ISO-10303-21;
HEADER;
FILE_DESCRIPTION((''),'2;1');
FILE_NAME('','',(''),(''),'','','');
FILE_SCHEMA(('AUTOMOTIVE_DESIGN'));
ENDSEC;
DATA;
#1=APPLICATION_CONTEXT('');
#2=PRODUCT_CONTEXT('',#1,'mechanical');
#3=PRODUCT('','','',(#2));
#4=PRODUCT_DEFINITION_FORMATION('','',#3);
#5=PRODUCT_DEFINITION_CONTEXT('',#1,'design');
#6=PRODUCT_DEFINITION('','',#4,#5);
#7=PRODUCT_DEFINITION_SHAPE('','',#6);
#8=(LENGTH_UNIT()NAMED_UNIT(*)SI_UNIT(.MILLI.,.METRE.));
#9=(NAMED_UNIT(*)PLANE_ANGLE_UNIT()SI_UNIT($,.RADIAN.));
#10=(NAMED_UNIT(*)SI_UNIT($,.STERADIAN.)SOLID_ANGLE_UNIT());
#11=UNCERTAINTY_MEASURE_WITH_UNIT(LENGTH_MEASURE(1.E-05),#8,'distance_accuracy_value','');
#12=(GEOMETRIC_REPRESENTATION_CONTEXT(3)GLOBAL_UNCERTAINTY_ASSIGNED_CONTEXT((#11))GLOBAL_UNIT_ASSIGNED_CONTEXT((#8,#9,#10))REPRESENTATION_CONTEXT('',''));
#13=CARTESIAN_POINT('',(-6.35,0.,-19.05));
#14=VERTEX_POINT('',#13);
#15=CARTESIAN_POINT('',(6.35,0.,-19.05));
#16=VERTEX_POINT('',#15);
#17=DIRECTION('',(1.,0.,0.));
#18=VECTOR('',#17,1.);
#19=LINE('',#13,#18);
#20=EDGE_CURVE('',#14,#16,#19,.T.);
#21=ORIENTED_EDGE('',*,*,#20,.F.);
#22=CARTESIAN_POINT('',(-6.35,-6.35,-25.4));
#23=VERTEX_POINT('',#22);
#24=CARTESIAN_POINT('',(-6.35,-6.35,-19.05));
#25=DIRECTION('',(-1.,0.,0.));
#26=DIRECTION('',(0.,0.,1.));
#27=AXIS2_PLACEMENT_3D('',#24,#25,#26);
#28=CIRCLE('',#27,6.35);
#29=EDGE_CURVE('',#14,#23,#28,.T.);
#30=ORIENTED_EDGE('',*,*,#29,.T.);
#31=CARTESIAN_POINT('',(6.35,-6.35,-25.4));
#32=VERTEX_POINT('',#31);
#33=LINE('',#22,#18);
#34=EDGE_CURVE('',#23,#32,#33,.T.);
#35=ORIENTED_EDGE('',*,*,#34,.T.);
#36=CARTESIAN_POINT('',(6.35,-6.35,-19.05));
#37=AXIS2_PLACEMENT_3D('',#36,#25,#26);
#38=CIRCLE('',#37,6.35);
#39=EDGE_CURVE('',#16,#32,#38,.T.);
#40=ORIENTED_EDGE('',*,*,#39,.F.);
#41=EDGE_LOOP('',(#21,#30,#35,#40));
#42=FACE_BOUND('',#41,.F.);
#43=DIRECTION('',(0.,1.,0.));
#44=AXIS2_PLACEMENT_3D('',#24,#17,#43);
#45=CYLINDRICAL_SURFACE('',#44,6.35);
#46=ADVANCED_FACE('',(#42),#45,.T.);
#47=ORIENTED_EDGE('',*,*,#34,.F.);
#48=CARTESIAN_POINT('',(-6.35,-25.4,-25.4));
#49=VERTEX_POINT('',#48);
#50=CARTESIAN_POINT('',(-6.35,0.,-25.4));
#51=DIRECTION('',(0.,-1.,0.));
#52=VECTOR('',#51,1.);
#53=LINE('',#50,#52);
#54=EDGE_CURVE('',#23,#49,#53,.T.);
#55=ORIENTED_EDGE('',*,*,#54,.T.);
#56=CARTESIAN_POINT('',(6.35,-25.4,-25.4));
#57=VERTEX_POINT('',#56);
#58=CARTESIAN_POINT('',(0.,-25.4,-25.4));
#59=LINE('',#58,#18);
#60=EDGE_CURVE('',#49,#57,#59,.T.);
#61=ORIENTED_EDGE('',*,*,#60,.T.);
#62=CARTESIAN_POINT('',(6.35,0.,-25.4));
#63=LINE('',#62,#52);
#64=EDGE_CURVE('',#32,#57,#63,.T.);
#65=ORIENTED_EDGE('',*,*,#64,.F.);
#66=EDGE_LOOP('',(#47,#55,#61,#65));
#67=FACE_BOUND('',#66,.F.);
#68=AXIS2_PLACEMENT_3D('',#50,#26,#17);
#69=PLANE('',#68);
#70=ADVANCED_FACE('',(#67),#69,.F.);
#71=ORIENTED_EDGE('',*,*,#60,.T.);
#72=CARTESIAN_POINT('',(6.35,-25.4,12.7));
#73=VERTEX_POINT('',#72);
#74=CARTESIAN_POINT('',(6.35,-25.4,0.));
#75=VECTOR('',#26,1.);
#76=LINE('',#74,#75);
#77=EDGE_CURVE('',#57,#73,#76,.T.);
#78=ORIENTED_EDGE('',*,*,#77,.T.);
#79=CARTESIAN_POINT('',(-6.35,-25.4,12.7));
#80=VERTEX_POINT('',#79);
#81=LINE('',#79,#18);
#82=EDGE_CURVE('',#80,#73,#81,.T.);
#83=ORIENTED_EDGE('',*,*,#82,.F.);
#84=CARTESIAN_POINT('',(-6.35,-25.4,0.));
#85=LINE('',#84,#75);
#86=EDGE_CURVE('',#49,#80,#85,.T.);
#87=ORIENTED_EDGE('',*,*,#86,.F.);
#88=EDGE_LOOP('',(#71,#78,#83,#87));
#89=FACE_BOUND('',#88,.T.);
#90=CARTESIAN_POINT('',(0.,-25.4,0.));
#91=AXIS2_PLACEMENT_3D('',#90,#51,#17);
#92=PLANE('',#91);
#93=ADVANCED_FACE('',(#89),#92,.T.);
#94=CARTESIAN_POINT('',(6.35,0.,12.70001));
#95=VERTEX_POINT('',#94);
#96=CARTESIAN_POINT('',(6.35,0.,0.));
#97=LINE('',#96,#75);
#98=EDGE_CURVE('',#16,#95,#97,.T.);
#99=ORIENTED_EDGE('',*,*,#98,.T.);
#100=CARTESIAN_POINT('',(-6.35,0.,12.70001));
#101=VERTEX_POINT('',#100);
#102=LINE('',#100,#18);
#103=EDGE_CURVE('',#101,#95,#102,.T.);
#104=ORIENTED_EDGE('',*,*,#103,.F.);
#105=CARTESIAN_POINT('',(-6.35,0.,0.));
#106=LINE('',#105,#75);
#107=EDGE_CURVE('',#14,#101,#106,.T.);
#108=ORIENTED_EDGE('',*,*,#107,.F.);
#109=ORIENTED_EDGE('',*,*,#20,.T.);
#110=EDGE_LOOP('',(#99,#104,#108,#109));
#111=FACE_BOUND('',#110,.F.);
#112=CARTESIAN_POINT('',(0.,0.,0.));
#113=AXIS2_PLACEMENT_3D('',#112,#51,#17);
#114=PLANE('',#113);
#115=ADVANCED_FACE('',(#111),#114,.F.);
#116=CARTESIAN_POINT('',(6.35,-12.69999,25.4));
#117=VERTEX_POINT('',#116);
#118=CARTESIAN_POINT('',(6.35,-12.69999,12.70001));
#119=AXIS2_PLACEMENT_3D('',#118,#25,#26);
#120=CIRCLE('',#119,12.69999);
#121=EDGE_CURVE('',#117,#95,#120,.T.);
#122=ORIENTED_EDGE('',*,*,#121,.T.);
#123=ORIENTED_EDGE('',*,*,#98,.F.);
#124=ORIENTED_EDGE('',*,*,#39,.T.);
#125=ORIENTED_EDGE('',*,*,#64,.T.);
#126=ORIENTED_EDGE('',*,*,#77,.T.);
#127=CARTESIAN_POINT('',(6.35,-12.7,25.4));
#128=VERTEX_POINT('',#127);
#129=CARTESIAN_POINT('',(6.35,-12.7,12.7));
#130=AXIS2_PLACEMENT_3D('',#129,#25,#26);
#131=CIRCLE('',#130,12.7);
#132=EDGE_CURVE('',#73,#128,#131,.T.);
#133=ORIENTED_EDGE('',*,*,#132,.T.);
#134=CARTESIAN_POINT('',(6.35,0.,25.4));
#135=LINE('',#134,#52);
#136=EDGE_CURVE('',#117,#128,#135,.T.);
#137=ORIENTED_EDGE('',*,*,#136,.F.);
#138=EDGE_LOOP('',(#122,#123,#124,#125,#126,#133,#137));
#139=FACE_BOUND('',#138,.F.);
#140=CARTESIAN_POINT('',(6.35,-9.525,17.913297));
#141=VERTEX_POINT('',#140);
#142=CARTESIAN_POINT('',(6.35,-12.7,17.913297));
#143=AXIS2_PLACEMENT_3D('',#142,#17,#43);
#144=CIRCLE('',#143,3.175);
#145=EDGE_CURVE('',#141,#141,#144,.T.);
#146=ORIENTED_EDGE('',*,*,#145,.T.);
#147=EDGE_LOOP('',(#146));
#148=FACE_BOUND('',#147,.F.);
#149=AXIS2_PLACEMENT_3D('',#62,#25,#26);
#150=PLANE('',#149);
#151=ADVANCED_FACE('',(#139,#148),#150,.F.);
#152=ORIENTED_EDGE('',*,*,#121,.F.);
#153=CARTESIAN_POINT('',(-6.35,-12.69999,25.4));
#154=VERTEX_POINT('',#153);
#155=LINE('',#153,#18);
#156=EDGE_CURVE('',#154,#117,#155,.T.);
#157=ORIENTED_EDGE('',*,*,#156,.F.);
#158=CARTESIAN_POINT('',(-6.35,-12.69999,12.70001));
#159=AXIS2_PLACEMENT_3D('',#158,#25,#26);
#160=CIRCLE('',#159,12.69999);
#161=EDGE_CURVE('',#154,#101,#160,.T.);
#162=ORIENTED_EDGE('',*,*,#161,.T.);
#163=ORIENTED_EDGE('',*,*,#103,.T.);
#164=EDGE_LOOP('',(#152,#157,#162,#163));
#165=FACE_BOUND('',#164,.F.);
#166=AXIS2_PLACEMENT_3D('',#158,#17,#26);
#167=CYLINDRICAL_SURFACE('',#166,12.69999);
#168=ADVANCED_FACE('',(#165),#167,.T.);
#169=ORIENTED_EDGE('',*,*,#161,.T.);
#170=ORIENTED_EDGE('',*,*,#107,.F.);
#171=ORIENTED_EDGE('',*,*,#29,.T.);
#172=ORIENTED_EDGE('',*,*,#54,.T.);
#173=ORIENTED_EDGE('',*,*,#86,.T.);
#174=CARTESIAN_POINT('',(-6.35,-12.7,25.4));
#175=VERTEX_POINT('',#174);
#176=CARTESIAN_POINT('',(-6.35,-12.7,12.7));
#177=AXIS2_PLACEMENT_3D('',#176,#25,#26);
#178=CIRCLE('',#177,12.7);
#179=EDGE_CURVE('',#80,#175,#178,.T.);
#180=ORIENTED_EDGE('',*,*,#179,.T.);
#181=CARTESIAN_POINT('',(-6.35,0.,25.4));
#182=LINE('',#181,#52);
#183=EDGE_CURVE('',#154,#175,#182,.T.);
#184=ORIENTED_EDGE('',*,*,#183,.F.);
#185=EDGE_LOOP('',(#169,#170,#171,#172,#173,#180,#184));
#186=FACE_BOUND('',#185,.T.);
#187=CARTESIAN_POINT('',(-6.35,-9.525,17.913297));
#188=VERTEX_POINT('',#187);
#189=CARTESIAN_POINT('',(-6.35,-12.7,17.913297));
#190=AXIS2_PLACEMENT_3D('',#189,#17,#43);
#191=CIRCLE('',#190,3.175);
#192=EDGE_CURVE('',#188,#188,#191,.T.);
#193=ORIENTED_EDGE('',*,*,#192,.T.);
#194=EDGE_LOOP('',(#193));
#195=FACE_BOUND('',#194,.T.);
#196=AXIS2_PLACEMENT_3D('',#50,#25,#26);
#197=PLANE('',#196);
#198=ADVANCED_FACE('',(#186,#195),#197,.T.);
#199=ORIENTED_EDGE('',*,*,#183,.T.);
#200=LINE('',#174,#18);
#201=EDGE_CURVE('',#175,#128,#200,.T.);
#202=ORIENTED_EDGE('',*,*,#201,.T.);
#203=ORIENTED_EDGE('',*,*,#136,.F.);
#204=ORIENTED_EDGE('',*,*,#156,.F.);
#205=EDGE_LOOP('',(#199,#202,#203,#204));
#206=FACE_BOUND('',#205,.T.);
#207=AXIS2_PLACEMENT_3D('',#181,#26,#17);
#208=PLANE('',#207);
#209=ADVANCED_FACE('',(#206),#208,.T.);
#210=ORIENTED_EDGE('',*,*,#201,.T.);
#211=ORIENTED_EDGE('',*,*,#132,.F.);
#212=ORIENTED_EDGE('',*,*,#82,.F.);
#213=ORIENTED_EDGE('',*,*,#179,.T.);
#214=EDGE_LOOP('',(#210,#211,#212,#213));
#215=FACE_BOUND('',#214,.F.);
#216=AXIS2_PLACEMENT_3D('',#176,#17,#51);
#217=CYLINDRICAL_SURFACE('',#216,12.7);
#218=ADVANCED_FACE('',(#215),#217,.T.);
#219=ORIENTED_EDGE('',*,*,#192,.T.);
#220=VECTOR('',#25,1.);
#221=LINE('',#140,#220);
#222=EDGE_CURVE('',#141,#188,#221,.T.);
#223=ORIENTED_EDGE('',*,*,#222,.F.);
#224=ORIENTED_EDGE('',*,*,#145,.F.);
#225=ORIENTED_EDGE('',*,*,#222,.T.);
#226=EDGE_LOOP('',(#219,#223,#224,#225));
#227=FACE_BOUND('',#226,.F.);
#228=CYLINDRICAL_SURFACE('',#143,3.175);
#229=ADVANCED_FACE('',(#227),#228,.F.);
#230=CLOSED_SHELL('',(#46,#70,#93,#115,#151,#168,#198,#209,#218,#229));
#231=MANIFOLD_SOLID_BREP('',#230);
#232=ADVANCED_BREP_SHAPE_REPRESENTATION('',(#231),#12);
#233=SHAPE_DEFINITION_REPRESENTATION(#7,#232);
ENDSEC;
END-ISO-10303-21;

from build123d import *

# Parameters (mm, degrees)
F0_W     = 12.7
F0_H     = 50.8
F1_DEPTH = 25.4
F2_R     = 3.175
F3_DEPTH = 25.4
F4_R     = 12.7
F5_R     = 12.69999
F6_R     = 6.35


# Not quite as in the source:
# - a fillet or chamfer is up to 0.001 mm smaller than in the source, because OpenCascade refuses the exact size


with BuildPart() as f1:
    # F0 (on Front) → F1 (new body)
    with BuildSketch(Plane.XZ):
        Rectangle(F0_W, F0_H)
    extrude(amount=F1_DEPTH)

    # F2 (on face) → F3 (cut)
    with BuildSketch(Plane.YZ.offset(6.35)):
        with Locations((-12.7, 17.9132968187)):
            Circle(F2_R)
    extrude(amount=-F3_DEPTH, mode=Mode.SUBTRACT)

    # F4
    f4_edges = [f1.edges().sort_by_distance(p)[0] for p in [
        (0, -25.4, 25.4),
    ]]
    fillet(f4_edges, radius=F4_R)

    # F5 (radius 12.7 in the source; OpenCascade refuses exactly that, so slightly less here)
    f5_edges = [f1.edges().sort_by_distance(p)[0] for p in [
        (0, 0, 25.4),
    ]]
    fillet(f5_edges, radius=F5_R)

    # F6
    f6_edges = [f1.edges().sort_by_distance(p)[0] for p in [
        (0, 0, -25.4),
    ]]
    fillet(f6_edges, radius=F6_R)


solid = f1.part
